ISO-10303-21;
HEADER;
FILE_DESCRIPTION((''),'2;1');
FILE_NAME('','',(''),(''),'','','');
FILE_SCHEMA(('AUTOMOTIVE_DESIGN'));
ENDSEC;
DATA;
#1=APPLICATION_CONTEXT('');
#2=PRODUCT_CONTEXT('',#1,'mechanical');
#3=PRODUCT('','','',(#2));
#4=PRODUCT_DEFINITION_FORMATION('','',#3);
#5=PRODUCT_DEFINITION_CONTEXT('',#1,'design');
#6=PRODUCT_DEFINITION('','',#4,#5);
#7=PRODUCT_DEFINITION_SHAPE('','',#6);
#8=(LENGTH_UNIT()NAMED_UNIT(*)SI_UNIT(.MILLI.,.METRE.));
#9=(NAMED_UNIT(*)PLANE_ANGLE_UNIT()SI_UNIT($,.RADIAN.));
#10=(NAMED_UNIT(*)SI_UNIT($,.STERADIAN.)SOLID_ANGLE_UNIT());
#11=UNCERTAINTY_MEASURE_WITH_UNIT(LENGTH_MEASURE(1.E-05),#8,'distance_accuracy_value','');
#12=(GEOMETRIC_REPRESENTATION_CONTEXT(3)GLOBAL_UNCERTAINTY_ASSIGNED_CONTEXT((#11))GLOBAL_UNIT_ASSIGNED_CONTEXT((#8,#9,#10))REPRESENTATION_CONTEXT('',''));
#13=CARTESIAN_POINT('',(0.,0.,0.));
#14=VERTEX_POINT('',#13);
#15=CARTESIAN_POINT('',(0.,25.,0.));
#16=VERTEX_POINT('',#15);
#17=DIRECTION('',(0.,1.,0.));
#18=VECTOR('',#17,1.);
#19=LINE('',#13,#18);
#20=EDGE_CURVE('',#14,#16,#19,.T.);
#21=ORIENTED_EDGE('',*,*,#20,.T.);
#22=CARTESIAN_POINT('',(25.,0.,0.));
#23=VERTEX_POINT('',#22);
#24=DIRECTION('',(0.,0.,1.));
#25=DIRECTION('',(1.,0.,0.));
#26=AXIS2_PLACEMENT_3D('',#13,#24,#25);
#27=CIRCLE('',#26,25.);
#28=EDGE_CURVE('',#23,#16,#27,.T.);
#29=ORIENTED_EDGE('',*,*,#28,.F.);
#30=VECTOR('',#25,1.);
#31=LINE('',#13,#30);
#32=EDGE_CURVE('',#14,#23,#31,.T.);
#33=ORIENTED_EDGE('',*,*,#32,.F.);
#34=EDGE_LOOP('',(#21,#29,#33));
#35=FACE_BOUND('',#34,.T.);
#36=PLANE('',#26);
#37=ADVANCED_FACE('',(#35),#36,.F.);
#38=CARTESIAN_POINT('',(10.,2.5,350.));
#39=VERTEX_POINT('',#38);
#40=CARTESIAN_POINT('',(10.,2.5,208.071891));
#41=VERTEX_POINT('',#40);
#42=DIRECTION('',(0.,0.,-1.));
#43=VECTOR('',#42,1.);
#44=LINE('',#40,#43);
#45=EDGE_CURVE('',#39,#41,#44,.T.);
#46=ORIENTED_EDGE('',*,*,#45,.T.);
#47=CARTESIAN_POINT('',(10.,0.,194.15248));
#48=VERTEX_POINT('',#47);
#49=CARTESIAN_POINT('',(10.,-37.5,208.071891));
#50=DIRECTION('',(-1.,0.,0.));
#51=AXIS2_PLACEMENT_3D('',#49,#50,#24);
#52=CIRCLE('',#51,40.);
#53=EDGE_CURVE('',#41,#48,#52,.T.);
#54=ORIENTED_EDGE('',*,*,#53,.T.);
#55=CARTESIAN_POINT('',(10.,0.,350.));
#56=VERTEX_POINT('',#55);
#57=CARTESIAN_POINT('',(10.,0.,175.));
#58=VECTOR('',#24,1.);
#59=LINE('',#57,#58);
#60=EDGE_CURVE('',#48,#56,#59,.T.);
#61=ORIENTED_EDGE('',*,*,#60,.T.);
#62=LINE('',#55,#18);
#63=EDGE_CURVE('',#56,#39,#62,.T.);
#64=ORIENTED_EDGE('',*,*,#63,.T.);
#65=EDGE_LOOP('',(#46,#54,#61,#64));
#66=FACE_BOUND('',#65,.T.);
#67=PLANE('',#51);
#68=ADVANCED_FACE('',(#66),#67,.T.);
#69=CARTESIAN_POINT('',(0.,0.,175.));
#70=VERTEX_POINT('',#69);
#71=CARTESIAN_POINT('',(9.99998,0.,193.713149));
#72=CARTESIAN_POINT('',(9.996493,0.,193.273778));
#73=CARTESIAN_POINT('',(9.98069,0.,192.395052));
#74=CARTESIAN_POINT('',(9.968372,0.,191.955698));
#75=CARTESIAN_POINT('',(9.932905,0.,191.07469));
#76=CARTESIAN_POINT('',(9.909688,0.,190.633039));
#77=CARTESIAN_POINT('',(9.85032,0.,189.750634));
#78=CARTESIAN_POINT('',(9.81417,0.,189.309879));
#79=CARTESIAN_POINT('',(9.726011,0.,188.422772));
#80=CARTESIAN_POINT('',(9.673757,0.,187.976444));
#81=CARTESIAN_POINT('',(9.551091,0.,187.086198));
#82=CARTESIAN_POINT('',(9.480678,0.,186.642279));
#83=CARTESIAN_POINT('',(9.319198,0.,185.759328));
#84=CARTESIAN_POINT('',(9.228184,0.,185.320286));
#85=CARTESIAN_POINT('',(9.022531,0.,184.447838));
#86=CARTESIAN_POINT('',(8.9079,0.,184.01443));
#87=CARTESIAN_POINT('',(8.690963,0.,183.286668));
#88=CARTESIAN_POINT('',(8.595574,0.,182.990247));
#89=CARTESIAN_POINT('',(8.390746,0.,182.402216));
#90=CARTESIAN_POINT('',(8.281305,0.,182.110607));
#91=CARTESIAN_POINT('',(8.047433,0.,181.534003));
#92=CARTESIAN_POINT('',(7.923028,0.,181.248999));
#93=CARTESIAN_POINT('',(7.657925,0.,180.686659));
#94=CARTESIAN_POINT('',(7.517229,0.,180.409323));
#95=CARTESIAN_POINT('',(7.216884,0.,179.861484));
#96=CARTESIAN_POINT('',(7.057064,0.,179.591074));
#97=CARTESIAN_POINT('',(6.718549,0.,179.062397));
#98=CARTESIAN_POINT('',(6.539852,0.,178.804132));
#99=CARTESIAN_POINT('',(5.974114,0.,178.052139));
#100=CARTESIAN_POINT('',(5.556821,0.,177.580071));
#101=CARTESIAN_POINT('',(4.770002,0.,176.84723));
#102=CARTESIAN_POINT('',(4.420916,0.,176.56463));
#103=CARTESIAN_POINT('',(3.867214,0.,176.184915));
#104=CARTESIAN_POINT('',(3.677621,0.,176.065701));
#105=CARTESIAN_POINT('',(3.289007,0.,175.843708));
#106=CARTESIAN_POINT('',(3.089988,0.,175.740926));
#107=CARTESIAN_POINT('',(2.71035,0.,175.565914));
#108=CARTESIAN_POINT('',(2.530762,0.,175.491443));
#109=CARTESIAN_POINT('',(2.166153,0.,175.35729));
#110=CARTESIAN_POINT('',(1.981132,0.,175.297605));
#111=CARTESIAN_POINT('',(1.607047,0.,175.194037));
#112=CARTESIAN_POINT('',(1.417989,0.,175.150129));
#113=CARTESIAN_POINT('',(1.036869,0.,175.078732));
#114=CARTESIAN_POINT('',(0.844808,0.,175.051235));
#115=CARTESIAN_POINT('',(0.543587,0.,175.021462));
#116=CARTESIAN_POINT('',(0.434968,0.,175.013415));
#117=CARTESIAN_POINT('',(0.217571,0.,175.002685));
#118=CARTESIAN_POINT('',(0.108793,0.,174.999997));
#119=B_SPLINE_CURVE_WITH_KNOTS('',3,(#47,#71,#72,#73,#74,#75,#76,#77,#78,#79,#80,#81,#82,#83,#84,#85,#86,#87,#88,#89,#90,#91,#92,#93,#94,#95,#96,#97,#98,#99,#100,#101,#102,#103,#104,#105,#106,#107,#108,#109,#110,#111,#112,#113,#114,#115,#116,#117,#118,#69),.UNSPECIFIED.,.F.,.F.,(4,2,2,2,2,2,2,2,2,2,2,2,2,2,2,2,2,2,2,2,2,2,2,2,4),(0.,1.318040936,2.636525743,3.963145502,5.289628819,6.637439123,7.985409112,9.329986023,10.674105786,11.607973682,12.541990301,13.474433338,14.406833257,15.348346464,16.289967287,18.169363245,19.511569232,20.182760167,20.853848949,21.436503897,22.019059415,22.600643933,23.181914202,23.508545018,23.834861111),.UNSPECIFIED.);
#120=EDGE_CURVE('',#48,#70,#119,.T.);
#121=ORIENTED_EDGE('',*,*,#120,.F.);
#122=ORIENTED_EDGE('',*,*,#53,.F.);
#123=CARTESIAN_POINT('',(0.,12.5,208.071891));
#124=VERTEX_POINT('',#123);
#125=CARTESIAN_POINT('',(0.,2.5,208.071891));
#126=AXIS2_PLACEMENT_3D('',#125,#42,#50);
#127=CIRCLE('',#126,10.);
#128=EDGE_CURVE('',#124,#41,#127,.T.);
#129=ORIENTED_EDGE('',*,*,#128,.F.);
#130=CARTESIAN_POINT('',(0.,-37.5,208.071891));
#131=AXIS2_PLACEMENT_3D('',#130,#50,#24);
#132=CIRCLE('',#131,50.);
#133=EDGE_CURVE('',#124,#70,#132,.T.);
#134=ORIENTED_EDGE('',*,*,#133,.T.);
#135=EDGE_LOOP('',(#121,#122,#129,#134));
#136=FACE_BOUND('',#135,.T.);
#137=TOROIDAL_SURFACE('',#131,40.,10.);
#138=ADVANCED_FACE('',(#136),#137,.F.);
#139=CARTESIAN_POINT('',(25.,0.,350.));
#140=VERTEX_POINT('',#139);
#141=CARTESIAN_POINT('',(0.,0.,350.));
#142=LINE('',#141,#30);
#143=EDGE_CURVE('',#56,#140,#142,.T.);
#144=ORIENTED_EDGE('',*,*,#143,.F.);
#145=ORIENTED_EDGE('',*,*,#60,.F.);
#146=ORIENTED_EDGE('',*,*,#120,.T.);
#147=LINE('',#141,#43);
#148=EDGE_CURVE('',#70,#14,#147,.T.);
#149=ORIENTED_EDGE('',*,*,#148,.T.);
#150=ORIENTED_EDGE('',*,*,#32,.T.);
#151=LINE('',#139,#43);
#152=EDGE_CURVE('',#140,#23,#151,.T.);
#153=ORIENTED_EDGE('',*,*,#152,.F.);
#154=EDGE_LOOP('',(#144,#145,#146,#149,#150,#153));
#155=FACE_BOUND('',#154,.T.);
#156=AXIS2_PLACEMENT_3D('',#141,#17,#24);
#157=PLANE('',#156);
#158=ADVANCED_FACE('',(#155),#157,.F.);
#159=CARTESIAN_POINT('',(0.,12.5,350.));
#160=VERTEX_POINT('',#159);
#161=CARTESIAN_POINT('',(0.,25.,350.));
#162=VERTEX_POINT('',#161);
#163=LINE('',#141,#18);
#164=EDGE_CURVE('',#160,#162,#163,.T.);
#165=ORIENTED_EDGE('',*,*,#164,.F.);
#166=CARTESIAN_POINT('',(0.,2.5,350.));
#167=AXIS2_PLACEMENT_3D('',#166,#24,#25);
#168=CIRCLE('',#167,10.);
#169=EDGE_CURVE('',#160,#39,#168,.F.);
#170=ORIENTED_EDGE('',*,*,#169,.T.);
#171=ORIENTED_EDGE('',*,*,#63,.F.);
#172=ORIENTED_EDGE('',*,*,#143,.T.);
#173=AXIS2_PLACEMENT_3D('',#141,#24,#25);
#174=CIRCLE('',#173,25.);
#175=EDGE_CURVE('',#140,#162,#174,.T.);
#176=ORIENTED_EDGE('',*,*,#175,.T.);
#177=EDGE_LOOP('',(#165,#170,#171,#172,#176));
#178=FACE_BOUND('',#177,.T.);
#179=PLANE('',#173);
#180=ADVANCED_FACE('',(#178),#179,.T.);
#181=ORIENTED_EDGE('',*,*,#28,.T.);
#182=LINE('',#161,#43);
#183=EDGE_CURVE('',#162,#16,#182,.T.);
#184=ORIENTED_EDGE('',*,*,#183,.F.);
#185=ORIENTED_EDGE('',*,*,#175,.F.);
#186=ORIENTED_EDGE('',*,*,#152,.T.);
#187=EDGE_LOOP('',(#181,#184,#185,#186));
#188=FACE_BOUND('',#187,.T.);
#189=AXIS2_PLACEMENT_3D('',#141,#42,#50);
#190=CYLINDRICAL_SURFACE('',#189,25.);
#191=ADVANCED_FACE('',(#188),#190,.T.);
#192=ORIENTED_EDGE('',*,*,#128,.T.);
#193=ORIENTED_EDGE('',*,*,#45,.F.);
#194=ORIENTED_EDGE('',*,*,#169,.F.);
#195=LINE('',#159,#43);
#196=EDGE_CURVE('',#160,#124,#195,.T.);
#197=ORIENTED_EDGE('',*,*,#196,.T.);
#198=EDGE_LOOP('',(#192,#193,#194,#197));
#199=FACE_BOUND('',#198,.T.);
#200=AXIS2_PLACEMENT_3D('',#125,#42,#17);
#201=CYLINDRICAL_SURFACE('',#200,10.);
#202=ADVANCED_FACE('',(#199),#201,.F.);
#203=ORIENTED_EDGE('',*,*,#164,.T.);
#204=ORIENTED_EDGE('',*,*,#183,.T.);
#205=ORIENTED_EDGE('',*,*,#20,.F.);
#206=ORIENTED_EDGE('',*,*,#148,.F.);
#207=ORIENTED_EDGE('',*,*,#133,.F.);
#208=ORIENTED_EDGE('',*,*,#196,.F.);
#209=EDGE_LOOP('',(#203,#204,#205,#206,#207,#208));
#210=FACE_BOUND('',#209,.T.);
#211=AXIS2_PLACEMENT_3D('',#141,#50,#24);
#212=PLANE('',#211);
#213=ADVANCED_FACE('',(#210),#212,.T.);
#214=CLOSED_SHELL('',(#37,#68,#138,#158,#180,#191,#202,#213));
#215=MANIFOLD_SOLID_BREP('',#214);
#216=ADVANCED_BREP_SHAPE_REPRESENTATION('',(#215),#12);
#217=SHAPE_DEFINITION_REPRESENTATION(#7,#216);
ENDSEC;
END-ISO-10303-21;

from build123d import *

# Parameters (mm, degrees)
BOSS_EXTRUDE1_DEPTH = 350
CUT_EXTRUDE1_DEPTH  = 10
FILLET1_R           = 10


with BuildPart() as part:
    # Sketch1 → Boss-Extrude1 (new body)
    with BuildSketch(Plane.XY):
        with BuildLine():
            Line((0, 0), (0, 25))
            ThreePointArc((0, 25), (17.67766953, 17.67766953), (25, 0))
            Line((25, 0), (0, 0))
        make_face()
    extrude(amount=BOSS_EXTRUDE1_DEPTH)

    # Sketch2 → Cut-Extrude1 (cut)
    with BuildSketch(Plane.ZY):
        with BuildLine():
            Line((350, 0), (350, 12.5))
            Line((350, 12.5), (208.071891388, 12.5))
            ThreePointArc((208.071891388, 12.5), (190.394221859, 9.270717335), (175, 0))
            Line((175, 0), (350, 0))
        make_face()
    extrude(amount=-CUT_EXTRUDE1_DEPTH, mode=Mode.SUBTRACT)

    # Fillet1
    fillet1_edges = [part.edges().sort_by_distance(p)[0] for p in [
        (10, 12.5, 279.035945694),
        (10, 9.270717335, 190.394221859),
    ]]
    fillet(fillet1_edges, radius=FILLET1_R - 0.0001)  # a hair under: the kernel refuses the full size


solid = part.part
